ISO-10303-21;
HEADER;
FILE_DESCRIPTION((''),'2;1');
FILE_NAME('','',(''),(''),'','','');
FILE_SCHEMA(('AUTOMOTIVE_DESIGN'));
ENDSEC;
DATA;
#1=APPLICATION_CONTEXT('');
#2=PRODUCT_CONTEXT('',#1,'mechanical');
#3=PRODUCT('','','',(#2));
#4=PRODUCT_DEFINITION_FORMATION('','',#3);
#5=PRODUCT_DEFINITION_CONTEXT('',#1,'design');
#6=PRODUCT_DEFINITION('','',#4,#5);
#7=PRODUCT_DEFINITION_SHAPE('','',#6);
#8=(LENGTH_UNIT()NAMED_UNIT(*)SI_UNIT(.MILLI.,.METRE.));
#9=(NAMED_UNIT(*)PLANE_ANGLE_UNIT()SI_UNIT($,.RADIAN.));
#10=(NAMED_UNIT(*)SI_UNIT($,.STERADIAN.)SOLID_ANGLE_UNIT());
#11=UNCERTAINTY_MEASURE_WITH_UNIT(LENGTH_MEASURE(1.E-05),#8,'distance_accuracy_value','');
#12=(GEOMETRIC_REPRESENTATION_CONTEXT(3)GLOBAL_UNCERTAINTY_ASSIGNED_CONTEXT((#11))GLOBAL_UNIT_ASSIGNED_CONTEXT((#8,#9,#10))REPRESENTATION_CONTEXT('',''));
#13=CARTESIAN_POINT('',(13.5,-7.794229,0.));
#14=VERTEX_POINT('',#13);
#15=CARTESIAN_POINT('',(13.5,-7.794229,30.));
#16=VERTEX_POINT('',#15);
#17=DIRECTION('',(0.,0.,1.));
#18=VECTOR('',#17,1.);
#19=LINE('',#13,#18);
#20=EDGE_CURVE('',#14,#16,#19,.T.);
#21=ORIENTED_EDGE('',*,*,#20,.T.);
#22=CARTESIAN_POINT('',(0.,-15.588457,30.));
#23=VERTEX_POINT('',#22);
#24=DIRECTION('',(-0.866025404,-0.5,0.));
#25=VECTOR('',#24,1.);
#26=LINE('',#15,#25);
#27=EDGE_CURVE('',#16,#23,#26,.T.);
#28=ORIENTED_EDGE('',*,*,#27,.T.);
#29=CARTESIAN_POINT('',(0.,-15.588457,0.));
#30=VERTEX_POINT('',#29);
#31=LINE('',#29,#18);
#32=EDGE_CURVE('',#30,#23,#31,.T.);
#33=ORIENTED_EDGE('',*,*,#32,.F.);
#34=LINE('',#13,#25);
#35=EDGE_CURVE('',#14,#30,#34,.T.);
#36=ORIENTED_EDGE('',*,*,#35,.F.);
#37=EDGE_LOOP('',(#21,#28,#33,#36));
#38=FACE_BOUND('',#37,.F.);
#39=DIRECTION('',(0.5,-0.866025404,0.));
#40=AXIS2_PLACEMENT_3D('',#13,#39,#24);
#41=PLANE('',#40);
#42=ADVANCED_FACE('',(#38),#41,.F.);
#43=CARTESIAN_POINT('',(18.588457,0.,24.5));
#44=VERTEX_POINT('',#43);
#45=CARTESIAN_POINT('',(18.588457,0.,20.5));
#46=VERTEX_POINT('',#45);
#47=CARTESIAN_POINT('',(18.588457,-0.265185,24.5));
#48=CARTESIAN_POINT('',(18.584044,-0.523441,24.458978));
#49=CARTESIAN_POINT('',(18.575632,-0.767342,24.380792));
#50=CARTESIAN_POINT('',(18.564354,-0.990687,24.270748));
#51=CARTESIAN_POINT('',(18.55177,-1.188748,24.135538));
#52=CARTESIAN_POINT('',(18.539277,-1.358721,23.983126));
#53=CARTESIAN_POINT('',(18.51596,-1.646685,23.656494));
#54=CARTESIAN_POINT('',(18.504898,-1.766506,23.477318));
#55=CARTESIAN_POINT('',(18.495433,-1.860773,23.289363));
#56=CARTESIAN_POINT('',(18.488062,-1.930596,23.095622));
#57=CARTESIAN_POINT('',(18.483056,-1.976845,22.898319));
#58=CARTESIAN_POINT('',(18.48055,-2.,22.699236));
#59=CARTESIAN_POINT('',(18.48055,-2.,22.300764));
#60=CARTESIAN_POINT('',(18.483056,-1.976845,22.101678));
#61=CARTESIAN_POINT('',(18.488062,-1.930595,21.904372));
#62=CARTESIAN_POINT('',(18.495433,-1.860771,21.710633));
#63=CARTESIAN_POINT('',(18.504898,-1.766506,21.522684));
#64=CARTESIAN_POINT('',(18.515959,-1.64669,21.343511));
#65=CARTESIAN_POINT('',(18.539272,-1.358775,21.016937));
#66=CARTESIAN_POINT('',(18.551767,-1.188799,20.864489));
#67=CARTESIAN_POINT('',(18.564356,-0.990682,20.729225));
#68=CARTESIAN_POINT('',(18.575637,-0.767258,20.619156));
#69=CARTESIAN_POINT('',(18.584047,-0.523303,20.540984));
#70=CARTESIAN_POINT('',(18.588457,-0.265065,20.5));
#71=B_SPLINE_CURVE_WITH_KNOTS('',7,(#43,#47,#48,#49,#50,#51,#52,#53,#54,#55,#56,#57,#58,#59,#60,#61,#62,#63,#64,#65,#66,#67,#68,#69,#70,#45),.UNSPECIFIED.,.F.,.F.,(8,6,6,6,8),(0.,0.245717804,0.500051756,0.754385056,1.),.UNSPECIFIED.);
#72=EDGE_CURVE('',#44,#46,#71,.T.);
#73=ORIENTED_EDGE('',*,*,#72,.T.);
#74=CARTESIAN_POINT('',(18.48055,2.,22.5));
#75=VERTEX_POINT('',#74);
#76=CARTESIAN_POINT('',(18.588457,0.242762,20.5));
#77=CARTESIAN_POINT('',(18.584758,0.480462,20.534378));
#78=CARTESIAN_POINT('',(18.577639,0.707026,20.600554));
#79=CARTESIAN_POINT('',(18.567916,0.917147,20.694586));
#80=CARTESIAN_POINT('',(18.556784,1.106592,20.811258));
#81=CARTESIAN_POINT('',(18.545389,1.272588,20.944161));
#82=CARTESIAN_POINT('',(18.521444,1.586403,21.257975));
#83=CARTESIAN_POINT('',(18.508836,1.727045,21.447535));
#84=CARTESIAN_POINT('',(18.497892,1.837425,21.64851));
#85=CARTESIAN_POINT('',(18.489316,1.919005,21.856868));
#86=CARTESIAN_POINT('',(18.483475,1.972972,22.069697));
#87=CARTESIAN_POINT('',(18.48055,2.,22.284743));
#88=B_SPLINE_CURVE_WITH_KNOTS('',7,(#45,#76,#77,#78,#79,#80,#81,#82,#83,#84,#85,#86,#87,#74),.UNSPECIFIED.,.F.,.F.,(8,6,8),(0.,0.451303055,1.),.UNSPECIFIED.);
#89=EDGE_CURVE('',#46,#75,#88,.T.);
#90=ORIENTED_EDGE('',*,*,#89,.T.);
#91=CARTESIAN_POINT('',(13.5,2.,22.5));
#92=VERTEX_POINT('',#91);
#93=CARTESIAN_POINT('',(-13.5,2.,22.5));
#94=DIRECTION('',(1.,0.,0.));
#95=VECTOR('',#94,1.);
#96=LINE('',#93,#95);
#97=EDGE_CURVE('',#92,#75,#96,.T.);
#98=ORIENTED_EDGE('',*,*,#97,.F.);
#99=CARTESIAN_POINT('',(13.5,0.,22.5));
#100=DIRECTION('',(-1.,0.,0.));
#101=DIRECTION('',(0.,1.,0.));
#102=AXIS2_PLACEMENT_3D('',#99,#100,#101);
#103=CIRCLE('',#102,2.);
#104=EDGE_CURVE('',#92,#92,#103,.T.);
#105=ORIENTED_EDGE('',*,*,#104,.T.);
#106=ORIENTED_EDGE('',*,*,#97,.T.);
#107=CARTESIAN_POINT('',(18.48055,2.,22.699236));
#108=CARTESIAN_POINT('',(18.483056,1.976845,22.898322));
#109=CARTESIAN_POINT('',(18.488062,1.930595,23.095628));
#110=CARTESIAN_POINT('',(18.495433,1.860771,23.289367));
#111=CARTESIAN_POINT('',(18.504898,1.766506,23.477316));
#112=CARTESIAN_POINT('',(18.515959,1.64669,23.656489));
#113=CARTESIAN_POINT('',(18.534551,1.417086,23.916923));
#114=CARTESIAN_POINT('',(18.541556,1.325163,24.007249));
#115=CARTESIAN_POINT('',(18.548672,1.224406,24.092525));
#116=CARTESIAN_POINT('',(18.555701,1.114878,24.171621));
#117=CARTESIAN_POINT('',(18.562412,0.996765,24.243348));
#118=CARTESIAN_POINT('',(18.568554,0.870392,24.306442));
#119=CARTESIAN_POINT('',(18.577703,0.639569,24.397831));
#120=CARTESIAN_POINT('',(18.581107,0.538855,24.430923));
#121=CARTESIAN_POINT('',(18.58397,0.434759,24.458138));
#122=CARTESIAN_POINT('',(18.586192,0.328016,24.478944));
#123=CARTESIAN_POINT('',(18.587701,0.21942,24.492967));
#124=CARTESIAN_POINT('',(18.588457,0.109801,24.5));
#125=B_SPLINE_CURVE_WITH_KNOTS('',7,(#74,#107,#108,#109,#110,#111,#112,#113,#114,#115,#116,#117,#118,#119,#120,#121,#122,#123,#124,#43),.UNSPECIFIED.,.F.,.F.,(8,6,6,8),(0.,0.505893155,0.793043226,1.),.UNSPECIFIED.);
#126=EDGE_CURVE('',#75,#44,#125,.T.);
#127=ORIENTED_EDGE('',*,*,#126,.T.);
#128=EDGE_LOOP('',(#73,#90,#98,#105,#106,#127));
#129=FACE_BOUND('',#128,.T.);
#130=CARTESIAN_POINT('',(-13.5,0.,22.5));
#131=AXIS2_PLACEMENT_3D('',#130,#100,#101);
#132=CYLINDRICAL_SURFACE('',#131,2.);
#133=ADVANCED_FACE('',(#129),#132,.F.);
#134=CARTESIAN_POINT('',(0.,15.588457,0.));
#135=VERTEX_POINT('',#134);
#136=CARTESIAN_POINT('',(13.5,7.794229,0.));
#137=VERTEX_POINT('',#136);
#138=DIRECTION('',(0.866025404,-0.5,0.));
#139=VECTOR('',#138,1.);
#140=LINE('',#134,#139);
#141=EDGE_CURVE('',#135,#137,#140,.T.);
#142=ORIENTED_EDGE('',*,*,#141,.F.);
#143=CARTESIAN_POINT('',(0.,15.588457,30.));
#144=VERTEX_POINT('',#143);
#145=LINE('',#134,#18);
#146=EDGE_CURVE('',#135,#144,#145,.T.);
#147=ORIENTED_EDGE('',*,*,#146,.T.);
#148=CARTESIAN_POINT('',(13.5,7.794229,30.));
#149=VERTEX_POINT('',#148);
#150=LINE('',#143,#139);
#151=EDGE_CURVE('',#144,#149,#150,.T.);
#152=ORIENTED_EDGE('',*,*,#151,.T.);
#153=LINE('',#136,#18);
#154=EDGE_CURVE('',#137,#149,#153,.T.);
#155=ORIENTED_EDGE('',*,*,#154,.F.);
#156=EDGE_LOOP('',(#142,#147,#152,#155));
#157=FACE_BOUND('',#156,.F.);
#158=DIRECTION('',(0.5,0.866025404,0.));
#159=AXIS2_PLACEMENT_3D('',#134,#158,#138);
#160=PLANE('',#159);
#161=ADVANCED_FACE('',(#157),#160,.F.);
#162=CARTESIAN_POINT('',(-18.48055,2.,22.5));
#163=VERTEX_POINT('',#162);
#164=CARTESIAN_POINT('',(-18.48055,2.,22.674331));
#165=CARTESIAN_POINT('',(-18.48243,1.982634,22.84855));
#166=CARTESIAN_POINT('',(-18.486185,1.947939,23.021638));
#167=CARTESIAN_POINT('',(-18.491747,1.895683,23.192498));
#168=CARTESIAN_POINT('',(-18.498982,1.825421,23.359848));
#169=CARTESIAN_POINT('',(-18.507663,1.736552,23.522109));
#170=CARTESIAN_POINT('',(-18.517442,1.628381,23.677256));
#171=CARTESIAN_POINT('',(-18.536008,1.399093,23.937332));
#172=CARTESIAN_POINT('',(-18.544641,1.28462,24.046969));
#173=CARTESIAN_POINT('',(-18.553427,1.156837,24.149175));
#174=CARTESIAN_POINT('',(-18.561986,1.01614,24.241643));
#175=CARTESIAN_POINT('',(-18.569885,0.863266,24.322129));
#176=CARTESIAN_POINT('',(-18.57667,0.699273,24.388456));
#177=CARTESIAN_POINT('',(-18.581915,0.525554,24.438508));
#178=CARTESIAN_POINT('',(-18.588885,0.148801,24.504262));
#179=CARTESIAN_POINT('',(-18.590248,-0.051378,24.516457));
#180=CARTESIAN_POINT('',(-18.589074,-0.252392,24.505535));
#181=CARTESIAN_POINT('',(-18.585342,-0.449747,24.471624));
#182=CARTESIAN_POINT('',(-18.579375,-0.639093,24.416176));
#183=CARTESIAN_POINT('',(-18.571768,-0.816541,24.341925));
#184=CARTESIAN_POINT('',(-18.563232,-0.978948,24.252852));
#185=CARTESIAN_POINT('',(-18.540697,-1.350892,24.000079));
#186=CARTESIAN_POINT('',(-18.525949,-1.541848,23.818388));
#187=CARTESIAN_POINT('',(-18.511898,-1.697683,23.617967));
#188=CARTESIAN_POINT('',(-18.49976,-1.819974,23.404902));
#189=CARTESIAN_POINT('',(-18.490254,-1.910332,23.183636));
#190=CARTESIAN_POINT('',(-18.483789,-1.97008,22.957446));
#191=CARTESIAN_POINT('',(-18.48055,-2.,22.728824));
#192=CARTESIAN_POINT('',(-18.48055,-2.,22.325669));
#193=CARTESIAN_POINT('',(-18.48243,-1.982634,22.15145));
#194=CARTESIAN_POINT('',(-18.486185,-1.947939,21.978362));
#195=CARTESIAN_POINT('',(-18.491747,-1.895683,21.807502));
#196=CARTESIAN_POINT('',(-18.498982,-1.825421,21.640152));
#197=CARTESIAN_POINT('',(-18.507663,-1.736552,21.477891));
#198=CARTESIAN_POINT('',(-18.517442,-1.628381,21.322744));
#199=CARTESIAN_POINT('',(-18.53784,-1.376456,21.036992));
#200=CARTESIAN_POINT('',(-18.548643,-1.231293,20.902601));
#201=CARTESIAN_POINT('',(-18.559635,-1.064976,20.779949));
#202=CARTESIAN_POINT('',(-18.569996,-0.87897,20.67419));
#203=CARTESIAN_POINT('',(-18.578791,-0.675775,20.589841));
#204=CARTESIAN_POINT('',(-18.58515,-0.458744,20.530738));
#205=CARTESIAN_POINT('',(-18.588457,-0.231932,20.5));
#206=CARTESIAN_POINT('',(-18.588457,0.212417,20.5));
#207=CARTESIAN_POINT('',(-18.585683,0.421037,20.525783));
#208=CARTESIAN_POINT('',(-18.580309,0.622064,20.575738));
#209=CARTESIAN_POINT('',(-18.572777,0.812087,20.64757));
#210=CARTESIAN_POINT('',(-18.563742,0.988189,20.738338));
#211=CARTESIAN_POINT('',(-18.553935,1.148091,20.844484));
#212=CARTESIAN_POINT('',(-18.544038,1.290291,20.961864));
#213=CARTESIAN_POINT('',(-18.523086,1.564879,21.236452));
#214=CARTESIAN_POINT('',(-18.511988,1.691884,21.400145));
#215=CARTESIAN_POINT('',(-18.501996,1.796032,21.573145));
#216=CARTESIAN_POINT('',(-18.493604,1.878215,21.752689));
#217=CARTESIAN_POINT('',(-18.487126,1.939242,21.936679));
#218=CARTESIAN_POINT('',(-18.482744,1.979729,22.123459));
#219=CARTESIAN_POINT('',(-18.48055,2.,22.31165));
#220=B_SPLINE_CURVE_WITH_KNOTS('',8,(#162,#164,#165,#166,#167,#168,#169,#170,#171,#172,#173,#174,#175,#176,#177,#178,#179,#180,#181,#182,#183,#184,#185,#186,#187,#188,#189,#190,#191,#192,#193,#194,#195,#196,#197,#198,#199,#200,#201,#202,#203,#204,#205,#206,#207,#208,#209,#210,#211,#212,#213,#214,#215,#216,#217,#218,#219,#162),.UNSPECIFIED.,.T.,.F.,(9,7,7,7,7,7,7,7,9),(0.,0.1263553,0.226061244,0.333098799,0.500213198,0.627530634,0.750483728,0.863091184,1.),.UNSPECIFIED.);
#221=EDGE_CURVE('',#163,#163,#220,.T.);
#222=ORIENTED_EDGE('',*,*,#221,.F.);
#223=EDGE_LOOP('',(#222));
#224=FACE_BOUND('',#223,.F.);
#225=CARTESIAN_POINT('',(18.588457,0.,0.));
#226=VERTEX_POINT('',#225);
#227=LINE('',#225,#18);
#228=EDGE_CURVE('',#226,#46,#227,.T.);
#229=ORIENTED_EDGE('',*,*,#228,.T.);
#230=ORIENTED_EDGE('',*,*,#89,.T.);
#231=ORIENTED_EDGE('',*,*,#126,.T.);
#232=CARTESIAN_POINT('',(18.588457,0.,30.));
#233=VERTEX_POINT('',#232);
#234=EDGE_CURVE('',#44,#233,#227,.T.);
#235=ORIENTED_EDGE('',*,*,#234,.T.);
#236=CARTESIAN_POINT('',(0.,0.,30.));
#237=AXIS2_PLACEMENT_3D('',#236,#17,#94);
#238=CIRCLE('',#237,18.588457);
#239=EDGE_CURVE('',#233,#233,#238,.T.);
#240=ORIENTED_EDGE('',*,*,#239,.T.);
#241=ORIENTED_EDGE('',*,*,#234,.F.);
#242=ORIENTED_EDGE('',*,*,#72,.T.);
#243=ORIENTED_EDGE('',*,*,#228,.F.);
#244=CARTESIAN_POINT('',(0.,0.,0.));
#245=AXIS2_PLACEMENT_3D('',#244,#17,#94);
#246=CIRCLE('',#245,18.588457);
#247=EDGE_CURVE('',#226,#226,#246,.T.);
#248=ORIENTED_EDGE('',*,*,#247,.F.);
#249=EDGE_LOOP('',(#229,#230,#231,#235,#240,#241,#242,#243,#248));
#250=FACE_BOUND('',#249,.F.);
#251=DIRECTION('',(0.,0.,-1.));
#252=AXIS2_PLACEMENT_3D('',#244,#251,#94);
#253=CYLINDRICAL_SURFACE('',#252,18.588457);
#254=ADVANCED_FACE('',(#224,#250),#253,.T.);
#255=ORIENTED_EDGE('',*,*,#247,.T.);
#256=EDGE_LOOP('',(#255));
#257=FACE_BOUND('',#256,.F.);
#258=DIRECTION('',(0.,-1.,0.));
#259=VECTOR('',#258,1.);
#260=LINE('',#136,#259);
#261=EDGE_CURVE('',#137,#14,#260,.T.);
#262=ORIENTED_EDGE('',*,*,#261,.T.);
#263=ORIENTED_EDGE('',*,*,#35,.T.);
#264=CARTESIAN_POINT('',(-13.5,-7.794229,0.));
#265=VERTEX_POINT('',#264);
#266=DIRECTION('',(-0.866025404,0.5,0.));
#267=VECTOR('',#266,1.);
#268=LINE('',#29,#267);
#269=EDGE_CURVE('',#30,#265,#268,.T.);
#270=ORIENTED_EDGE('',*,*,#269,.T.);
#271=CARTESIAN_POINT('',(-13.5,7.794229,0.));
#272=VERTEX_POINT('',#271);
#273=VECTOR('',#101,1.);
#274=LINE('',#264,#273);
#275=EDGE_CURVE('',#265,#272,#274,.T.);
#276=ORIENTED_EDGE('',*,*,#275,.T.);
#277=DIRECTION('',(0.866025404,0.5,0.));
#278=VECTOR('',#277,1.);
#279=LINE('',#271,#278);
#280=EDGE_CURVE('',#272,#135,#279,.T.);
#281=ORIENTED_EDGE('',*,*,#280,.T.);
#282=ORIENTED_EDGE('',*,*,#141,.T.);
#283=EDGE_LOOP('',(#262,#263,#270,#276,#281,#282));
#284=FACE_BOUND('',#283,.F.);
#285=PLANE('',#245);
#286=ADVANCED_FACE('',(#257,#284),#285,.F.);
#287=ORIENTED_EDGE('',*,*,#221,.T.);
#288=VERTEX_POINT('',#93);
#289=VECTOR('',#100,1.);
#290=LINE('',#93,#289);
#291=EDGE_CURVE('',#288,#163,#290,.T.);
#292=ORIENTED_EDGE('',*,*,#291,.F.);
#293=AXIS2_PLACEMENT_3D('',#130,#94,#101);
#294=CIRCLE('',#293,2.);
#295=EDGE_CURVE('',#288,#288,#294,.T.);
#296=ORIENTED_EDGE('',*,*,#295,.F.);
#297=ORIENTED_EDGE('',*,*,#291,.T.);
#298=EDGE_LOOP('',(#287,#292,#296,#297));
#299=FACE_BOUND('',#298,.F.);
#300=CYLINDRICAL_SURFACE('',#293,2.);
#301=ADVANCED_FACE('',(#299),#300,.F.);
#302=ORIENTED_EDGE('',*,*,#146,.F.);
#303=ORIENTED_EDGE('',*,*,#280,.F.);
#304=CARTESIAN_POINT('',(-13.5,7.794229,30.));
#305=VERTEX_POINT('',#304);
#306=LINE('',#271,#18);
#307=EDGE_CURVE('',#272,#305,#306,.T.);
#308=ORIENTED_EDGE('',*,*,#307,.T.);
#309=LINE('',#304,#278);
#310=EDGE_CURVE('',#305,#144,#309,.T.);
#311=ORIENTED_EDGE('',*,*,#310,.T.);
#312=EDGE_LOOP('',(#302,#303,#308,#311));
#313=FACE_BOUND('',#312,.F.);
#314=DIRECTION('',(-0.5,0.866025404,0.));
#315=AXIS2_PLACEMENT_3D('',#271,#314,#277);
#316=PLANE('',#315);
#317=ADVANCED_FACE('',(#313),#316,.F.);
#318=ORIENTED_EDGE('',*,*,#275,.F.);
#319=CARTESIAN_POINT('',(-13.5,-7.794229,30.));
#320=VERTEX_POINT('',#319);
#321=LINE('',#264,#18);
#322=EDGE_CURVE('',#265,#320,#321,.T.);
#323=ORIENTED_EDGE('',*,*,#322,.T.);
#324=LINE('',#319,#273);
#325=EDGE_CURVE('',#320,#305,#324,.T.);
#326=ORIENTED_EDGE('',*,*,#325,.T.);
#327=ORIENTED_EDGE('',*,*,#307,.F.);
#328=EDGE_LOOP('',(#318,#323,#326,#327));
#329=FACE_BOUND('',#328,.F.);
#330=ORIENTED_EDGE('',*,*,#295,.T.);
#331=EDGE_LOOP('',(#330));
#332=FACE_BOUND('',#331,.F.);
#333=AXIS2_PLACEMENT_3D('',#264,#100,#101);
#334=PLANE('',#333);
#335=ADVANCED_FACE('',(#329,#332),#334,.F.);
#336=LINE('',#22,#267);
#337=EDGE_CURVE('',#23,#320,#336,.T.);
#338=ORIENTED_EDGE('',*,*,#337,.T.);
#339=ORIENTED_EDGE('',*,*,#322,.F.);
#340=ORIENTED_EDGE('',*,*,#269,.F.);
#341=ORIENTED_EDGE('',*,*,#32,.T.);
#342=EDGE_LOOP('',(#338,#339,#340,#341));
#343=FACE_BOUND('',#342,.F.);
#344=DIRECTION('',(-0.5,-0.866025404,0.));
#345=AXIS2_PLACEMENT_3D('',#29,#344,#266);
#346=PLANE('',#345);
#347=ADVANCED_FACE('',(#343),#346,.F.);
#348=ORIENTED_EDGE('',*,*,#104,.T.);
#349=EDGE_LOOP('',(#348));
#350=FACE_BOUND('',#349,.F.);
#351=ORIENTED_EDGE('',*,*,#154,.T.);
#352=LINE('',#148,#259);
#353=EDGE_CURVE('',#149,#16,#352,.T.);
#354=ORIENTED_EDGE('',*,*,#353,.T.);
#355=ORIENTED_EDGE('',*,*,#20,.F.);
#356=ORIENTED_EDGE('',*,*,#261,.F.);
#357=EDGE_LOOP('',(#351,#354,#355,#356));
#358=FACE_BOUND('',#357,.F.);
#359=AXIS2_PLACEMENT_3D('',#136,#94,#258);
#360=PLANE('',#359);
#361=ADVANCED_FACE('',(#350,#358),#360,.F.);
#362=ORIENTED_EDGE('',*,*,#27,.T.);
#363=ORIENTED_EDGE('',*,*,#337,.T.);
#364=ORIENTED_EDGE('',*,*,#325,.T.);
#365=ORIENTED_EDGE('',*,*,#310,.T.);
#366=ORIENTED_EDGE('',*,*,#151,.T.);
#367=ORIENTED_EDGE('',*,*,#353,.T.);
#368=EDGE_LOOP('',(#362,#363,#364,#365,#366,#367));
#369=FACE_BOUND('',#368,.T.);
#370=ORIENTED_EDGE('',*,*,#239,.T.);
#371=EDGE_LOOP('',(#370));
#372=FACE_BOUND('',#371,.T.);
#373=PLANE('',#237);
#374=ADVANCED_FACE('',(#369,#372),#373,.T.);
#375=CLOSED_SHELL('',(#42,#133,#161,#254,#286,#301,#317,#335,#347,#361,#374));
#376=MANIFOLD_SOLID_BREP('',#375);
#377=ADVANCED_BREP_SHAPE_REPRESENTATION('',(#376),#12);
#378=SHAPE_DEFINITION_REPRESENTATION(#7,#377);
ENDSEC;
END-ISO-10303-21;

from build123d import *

# Parameters (mm, degrees)
F0_R          = 18.5884572681
F1_DEPTH      = 30
F2_R          = 2
F3_DEPTH      = 5.0894572681
F3_DEPTH_BACK = 32.0894572681


# Not quite as in the source:
# - a feature names something its author has since deleted; it is built from what else it names


with BuildPart() as f1:
    # F0 (on Top) → F1 (new body)
    with BuildSketch(Plane.XY):
        Circle(F0_R)
        Polygon((0, 15.5884572681), (13.5, 7.7942286341), (13.5, -7.7942286341), (0, -15.5884572681), (-13.5, -7.7942286341), (-13.5, 7.7942286341), align=None, mode=Mode.SUBTRACT)
    extrude(amount=F1_DEPTH)

    # F2 (on face) → F3 (cut, two sides)
    with BuildSketch(Plane.YZ.offset(-13.5)) as f3_sk:
        with Locations((0, 22.5)):
            Circle(F2_R)
    extrude(amount=-F3_DEPTH, mode=Mode.SUBTRACT)
    extrude(f3_sk.sketch, amount=F3_DEPTH_BACK, mode=Mode.SUBTRACT)


solid = f1.part
